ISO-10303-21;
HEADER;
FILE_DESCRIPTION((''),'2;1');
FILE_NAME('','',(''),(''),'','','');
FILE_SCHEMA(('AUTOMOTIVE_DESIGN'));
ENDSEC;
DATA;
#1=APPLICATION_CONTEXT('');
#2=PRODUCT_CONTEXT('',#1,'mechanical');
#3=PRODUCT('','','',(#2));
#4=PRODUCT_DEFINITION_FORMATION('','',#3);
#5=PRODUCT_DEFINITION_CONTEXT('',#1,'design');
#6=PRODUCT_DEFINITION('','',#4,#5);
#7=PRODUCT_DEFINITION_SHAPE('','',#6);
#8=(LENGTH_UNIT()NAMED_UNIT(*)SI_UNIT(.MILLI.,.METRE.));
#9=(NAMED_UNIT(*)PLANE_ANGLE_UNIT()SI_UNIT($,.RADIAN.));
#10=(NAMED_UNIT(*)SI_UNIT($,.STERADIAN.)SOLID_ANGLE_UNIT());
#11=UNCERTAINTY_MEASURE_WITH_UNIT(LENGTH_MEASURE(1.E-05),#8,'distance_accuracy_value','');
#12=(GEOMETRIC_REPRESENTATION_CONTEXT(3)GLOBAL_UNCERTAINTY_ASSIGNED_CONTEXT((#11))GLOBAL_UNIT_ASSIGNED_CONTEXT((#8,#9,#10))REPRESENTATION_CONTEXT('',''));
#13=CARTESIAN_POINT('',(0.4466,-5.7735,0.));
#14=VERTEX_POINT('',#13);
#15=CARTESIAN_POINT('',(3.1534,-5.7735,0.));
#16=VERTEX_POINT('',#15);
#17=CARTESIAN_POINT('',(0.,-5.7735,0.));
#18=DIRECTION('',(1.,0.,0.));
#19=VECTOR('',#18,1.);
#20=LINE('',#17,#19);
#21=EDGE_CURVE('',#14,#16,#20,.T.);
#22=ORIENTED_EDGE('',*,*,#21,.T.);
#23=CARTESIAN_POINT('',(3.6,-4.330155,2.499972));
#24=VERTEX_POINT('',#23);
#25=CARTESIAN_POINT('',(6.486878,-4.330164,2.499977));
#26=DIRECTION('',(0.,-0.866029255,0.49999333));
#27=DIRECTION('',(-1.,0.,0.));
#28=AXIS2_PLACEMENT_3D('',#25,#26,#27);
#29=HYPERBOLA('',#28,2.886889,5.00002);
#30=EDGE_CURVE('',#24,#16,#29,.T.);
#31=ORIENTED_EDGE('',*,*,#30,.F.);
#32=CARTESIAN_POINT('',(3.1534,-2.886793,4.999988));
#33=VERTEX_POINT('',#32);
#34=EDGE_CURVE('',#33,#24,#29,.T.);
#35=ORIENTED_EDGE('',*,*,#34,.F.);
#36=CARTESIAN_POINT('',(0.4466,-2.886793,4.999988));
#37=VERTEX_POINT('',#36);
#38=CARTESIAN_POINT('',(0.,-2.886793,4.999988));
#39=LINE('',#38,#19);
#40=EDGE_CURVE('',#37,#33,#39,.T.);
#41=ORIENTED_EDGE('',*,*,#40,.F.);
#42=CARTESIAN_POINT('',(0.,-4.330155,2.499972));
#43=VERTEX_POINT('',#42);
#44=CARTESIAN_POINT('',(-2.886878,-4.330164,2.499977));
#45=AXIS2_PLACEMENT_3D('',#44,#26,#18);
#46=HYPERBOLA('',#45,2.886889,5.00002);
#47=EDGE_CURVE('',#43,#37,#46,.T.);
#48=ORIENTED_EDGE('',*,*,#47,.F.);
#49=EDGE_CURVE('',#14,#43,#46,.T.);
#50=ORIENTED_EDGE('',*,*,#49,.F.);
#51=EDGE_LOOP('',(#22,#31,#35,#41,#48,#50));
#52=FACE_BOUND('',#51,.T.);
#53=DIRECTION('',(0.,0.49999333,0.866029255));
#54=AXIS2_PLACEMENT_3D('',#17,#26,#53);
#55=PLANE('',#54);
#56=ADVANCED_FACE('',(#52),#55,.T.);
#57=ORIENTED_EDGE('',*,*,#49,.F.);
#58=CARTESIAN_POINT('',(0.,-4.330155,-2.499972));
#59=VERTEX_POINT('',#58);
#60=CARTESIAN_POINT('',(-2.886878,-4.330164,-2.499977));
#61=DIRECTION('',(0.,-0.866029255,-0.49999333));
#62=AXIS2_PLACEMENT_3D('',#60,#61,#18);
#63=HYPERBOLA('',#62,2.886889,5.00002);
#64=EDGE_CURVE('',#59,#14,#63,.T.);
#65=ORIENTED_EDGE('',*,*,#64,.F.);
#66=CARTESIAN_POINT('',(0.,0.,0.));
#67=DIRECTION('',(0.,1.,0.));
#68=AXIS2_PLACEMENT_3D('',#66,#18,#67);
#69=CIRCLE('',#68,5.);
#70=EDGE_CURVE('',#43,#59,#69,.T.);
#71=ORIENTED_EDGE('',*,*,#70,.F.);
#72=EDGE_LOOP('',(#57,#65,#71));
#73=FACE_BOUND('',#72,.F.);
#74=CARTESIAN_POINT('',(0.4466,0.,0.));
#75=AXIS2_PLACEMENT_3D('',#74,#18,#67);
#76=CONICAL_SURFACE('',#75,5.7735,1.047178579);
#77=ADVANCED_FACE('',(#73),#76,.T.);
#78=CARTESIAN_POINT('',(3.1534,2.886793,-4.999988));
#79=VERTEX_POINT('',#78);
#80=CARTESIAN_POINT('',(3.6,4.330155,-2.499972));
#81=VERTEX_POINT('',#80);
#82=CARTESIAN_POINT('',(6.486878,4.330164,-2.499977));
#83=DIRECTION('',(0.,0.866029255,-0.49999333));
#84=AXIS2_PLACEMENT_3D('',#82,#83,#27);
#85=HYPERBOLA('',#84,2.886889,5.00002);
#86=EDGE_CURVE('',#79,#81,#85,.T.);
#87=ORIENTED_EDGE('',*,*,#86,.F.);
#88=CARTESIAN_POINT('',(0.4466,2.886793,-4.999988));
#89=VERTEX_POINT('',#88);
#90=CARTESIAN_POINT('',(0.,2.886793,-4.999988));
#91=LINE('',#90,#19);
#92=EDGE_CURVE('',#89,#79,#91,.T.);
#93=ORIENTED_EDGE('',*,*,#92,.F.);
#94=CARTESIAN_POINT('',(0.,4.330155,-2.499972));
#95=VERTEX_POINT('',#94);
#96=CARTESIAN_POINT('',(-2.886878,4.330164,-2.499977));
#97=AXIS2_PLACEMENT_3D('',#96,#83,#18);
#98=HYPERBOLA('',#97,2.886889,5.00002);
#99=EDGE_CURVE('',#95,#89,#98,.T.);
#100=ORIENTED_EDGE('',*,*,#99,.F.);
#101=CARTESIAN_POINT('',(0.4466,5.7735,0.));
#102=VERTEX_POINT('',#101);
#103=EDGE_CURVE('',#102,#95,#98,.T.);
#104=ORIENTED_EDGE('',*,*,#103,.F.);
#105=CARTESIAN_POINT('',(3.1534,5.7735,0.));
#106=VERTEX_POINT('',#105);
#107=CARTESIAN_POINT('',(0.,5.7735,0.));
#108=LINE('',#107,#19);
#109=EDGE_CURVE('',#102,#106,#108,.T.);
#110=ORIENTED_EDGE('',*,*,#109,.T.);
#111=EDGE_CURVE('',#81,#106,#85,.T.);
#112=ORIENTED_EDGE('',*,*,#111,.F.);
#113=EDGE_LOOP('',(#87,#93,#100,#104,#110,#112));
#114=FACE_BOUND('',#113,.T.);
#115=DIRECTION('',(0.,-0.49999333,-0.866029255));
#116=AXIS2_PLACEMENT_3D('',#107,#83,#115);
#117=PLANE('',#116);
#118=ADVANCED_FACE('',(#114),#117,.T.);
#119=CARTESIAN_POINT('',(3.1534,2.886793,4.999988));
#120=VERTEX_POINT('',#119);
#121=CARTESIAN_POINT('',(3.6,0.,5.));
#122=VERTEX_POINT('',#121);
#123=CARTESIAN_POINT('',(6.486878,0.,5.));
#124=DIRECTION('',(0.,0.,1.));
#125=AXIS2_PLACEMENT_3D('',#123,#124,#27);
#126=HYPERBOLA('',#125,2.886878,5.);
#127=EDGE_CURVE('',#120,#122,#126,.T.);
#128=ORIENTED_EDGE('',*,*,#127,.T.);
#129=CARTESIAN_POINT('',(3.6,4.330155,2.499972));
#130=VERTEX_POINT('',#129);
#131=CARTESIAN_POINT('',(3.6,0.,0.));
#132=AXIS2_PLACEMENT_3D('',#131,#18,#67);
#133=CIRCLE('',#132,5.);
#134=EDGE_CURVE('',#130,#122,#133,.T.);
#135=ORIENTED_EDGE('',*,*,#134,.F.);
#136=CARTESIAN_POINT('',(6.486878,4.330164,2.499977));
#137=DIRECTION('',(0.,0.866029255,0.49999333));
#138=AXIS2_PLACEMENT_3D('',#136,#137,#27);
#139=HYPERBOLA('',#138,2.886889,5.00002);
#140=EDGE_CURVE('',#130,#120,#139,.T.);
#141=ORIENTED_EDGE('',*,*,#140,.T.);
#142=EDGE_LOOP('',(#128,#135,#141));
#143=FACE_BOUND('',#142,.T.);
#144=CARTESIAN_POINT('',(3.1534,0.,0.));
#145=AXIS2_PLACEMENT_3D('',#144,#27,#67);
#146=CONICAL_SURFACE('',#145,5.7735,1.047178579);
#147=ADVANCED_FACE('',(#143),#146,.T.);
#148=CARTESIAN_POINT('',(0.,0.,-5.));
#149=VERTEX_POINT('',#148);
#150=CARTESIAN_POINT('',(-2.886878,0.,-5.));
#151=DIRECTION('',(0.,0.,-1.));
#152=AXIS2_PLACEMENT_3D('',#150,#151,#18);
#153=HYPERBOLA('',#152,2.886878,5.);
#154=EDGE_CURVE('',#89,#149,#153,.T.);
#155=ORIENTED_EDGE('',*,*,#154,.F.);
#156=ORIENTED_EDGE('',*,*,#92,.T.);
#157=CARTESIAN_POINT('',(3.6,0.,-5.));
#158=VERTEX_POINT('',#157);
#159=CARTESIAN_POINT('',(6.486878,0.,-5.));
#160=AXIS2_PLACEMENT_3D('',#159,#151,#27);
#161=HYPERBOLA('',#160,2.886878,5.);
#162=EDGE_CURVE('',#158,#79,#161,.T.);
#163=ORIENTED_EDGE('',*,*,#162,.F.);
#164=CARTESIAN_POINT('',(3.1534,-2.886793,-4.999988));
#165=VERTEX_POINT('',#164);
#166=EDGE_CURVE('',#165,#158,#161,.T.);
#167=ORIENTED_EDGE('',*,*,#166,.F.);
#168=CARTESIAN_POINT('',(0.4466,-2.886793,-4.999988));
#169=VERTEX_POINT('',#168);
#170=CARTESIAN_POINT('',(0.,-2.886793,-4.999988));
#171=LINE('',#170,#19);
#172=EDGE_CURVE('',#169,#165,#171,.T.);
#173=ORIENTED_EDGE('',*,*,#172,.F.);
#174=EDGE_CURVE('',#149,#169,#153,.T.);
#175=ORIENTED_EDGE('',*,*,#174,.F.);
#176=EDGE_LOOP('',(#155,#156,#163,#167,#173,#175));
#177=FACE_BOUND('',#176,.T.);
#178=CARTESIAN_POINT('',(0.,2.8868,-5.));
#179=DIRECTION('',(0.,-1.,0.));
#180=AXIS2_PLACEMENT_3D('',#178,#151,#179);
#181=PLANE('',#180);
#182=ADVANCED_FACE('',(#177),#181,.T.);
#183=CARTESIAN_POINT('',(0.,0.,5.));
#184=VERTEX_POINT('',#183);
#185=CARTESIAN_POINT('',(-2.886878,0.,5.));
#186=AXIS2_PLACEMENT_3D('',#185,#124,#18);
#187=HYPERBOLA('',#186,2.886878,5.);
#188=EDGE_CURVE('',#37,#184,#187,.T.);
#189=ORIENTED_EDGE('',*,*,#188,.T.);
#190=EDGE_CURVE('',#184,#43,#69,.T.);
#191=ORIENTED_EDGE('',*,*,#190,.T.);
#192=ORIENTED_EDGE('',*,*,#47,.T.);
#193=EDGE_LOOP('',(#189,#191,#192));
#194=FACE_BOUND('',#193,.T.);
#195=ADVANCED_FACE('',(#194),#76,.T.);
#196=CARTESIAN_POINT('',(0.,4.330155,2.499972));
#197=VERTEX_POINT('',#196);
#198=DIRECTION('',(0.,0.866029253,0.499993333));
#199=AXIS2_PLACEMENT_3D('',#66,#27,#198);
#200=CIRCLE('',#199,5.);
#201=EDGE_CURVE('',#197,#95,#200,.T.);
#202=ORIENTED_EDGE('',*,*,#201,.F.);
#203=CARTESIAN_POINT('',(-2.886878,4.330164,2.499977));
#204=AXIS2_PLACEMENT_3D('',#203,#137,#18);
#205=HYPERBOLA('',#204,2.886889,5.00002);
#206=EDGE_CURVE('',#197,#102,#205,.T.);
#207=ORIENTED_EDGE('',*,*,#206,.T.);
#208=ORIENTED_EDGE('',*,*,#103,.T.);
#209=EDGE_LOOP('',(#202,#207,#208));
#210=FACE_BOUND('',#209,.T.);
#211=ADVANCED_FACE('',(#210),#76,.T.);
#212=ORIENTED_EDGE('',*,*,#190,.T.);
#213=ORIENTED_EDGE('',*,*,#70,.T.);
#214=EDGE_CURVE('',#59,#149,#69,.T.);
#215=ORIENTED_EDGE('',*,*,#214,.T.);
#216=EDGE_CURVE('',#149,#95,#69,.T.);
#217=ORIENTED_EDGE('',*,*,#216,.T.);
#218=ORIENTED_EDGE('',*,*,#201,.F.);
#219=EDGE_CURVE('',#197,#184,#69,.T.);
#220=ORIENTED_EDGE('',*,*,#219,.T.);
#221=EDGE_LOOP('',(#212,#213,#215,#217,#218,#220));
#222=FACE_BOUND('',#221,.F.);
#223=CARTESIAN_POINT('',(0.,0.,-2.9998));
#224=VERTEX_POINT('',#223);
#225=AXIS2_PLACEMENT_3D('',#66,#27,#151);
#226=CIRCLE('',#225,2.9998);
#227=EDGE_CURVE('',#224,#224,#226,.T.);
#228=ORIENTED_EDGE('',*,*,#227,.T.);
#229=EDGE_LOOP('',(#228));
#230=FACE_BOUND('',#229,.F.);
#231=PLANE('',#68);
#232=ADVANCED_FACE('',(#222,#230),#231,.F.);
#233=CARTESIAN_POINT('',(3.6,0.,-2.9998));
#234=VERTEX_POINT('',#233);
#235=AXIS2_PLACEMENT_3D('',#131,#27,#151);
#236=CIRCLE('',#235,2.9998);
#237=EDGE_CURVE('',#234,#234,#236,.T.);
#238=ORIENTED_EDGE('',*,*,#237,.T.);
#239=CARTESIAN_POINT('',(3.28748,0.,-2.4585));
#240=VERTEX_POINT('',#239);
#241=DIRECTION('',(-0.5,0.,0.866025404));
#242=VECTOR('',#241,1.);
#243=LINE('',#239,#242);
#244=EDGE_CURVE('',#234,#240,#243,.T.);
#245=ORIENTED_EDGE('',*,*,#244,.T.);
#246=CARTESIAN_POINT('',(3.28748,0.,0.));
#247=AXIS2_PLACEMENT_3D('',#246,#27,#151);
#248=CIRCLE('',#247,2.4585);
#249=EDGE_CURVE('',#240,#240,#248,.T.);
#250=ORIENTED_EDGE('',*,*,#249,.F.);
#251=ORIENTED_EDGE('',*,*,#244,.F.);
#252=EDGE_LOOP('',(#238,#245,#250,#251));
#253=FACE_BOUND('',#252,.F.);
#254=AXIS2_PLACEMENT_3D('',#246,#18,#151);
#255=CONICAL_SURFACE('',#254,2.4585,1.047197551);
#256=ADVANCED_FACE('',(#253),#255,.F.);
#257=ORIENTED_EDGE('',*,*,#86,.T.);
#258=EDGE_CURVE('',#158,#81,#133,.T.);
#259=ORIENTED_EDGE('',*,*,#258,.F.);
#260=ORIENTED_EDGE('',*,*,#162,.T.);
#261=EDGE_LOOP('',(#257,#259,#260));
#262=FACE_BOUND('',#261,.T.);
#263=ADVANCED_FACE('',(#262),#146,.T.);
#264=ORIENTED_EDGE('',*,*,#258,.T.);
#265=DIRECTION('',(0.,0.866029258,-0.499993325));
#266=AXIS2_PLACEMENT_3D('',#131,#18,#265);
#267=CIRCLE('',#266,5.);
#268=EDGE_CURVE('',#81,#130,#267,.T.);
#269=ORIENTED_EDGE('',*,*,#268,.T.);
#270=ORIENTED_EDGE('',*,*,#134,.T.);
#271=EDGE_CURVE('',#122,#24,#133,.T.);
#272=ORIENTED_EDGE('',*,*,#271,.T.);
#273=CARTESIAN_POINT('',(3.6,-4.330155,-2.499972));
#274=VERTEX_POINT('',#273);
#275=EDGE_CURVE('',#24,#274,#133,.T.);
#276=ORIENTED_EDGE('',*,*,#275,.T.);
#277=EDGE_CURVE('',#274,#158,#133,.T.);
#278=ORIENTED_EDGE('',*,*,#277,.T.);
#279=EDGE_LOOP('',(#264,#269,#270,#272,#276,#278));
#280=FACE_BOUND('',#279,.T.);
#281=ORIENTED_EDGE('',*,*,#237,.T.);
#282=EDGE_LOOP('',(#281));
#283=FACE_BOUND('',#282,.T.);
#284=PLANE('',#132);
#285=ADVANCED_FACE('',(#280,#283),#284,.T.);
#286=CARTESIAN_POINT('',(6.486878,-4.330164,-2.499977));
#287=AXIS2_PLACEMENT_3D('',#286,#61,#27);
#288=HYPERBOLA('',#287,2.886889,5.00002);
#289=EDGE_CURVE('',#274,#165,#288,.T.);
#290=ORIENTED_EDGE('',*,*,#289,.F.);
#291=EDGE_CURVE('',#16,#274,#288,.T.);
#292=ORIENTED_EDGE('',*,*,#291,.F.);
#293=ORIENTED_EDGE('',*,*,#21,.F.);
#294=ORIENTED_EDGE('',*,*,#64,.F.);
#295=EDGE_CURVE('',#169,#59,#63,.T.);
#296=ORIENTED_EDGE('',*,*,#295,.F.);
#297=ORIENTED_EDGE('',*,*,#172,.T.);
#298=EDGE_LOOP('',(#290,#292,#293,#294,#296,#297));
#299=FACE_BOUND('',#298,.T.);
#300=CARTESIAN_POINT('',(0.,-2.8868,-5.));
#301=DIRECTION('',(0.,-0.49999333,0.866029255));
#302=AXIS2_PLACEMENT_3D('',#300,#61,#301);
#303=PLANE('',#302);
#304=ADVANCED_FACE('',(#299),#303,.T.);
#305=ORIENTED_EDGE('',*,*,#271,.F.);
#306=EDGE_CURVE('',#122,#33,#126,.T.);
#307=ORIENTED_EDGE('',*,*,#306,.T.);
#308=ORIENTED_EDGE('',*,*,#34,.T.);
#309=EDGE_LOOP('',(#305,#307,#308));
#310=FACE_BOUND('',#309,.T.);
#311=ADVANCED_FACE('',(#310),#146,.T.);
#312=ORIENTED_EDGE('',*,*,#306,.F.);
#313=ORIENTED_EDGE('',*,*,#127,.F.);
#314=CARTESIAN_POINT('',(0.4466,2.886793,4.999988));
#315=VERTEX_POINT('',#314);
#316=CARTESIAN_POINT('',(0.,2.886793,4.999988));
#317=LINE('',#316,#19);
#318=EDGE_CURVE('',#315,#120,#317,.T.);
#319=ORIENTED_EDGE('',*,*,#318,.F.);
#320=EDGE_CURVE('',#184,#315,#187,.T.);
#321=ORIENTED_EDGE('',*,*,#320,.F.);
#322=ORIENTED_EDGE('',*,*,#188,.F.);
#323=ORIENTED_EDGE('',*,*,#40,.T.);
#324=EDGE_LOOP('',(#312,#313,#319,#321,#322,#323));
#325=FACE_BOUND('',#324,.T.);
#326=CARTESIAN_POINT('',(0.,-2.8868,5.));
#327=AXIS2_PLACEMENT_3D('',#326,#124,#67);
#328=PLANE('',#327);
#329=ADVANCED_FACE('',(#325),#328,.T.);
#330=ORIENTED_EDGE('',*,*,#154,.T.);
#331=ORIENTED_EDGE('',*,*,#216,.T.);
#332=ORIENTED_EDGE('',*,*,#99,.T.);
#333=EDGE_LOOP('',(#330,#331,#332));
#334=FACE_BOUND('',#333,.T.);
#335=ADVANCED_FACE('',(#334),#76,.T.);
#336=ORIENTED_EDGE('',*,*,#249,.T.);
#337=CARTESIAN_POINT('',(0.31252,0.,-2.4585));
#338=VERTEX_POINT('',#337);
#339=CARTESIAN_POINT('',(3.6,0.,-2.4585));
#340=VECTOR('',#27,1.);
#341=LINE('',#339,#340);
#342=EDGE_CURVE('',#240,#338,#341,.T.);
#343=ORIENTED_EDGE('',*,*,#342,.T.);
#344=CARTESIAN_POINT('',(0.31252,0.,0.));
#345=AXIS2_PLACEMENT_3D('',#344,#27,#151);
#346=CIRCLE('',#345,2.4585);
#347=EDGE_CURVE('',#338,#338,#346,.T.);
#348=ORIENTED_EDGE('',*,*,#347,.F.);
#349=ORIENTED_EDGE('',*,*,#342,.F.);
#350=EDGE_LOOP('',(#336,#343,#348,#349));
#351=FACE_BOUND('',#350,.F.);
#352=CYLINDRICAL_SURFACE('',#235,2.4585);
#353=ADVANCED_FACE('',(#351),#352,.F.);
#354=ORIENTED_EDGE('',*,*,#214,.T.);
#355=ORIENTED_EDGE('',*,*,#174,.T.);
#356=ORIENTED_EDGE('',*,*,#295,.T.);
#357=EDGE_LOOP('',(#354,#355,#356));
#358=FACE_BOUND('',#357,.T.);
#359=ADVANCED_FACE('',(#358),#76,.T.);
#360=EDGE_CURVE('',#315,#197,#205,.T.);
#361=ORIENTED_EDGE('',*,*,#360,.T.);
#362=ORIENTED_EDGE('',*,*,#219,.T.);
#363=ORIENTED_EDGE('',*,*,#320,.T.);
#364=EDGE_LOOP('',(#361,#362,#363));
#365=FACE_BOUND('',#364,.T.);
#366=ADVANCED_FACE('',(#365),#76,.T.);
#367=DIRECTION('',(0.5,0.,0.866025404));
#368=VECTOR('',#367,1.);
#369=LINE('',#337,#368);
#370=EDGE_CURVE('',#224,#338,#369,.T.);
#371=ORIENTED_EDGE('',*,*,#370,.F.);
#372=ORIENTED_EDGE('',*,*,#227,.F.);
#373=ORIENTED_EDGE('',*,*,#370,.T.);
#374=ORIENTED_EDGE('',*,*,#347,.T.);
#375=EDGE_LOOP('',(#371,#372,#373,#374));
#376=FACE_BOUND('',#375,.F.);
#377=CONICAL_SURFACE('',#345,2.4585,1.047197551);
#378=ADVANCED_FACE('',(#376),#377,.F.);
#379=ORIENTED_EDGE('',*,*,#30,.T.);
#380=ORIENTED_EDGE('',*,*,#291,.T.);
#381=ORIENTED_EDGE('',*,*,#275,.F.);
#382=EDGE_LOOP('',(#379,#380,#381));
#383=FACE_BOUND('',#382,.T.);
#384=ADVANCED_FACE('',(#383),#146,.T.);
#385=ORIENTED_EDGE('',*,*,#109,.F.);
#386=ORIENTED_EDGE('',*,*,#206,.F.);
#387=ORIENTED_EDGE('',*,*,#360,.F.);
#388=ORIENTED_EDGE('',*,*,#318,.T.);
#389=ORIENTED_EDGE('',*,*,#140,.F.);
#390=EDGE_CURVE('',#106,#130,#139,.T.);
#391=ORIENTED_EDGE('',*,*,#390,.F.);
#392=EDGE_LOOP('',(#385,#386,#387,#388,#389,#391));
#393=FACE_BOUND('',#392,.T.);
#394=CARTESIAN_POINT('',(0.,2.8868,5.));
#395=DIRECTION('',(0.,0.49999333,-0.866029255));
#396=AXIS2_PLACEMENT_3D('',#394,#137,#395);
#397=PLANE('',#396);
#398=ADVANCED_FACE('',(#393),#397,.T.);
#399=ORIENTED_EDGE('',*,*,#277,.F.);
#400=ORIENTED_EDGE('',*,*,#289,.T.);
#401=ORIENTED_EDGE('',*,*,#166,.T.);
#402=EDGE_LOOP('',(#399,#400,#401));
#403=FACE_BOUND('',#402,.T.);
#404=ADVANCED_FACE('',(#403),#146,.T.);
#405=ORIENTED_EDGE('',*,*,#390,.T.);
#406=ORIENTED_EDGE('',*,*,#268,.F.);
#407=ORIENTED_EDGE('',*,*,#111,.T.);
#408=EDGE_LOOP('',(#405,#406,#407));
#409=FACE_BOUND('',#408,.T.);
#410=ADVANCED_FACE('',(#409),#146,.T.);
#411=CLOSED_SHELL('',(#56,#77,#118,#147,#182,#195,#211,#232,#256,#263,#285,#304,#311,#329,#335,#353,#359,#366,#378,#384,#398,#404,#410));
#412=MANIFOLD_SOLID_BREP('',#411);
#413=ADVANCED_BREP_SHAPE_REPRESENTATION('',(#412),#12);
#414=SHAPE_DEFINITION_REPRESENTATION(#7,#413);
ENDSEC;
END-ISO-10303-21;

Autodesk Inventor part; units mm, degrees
ref_plane "YZ Plane" through (0, 0, 0) normal (1, 0, 0) x (0, 1, 0)
ref_plane "XZ Plane" through (0, 0, 0) normal (0, 1, 0) x (-1, 0, 0)
sketch "Sketch1" plane through (0, 0, 0) normal (1, 0, 0) x (0, 1, 0)
  line L0 (-5.7735, 0) -> (-2.8868, 5)
  line L1 (-2.8868, 5) -> (2.8868, 5)
  line L2 (2.8868, 5) -> (5.7735, 0)
  line L3 (5.7735, 0) -> (2.8868, -5)
  line L4 (2.8868, -5) -> (-2.8868, -5)
  line L5 (-2.8868, -5) -> (-5.7735, 0)
  point P0 (0, 0)
  point P1 (0, 0)
  dimension "d0" = 11.547
extrude "Body" add sketch "Sketch1" along normal blind 3.6
sketch "Sketch2" plane through (0, 0, 0) normal (0, 0, 1) x (1, 0, 0)
  line L0 (0, 2.8868) -> (0, 5.7735) projected
  line L1 (0, 5.7735) -> (3.6, 5.7735) projected
  line L2 (3.6, 2.8868) -> (3.6, 5.7735) projected
  line L3 (-0.72, 0) -> (4.32, 0) projected
  line L4 (0.4466, 5.7735) -> (0, 5)
  line L5 (3.1534, 5.7735) -> (3.6, 5)
  dimension "d3" = 30
  dimension "d4" = 30
  dimension "d5" = 10
  dimension "d6" = 10
revolve "Chamfer1" cut sketch "Sketch2" angle 360 about axis through (-10, 0, 0) along (1, 0, 0)
sketch "Sketch3" plane through (3.6, 0, 0) normal (1, 0, 0) x (0, 0, -1)
  arc A0 (-2.5, -4.3301) -> (2.5, -4.3301) centre (0, 0) ccw projected
hole "Thread" at (3.6, 0, 0) direction (-1, 0, 0) diameter 4.917 end through all thread size "M6x1" class "6H" standard "ISO Metric profile"
chamfer "Chamfer2" distance 0.5413 angle 30 1 edges at (3.6, 0, 2.4585) measured on face at (3.6, 4.1286, -0.0988)
chamfer "Chamfer3" distance 0.5413 angle 30 1 edges at (0, 0, 2.4585) measured on face at (0, 4.1286, -0.0988)
ref_plane "Work Plane1" through (-12.0937, 0, 0) normal (0, -0.8660254, -0.5) x (1, 0, 0)
equation "\"d0\" = 1.1547 * SW"
equation "\"d1\" = KOH"
equation "\"d8\" = -0.5 * GD1 + 0.5 * NND"
equation "\"d40\" = -0.5 * GD1 + 0.5 * NND"
equation "\"d10\" = -0.5 * GD1 + 0.5 * NND"
equation "\"d41\" = -0.5 * GD1 + 0.5 * NND"
equation "\"d3\" = ANG1"
equation "\"d4\" = ANG2"
equation "\"d5\" = SW0"
equation "\"d6\" = SW01"
equation "\"ANG1\" = 30deg"
equation "\"ANG2\" = 30deg"
equation "\"NND\" = 6"
equation "\"KOH\" = 3.6"
equation "\"SW0\" = SW"
equation "\"SW01\" = SW"
equation "\"GUL\" = 0.541266 * PTC"
equation "\"THREADDIA\" = 6"
equation "\"TOA\" = 30deg"
equation "\"PTC\" = 1"
equation "\"E0\" = 1.155 * SW"
equation "\"GAL\" = 0.541266 * PTC"
equation "\"SW\" = 10"
equation "\"GD1\" = 4.917468"
properties part number "AS 1112 - M6" material "Steel, Mild"
